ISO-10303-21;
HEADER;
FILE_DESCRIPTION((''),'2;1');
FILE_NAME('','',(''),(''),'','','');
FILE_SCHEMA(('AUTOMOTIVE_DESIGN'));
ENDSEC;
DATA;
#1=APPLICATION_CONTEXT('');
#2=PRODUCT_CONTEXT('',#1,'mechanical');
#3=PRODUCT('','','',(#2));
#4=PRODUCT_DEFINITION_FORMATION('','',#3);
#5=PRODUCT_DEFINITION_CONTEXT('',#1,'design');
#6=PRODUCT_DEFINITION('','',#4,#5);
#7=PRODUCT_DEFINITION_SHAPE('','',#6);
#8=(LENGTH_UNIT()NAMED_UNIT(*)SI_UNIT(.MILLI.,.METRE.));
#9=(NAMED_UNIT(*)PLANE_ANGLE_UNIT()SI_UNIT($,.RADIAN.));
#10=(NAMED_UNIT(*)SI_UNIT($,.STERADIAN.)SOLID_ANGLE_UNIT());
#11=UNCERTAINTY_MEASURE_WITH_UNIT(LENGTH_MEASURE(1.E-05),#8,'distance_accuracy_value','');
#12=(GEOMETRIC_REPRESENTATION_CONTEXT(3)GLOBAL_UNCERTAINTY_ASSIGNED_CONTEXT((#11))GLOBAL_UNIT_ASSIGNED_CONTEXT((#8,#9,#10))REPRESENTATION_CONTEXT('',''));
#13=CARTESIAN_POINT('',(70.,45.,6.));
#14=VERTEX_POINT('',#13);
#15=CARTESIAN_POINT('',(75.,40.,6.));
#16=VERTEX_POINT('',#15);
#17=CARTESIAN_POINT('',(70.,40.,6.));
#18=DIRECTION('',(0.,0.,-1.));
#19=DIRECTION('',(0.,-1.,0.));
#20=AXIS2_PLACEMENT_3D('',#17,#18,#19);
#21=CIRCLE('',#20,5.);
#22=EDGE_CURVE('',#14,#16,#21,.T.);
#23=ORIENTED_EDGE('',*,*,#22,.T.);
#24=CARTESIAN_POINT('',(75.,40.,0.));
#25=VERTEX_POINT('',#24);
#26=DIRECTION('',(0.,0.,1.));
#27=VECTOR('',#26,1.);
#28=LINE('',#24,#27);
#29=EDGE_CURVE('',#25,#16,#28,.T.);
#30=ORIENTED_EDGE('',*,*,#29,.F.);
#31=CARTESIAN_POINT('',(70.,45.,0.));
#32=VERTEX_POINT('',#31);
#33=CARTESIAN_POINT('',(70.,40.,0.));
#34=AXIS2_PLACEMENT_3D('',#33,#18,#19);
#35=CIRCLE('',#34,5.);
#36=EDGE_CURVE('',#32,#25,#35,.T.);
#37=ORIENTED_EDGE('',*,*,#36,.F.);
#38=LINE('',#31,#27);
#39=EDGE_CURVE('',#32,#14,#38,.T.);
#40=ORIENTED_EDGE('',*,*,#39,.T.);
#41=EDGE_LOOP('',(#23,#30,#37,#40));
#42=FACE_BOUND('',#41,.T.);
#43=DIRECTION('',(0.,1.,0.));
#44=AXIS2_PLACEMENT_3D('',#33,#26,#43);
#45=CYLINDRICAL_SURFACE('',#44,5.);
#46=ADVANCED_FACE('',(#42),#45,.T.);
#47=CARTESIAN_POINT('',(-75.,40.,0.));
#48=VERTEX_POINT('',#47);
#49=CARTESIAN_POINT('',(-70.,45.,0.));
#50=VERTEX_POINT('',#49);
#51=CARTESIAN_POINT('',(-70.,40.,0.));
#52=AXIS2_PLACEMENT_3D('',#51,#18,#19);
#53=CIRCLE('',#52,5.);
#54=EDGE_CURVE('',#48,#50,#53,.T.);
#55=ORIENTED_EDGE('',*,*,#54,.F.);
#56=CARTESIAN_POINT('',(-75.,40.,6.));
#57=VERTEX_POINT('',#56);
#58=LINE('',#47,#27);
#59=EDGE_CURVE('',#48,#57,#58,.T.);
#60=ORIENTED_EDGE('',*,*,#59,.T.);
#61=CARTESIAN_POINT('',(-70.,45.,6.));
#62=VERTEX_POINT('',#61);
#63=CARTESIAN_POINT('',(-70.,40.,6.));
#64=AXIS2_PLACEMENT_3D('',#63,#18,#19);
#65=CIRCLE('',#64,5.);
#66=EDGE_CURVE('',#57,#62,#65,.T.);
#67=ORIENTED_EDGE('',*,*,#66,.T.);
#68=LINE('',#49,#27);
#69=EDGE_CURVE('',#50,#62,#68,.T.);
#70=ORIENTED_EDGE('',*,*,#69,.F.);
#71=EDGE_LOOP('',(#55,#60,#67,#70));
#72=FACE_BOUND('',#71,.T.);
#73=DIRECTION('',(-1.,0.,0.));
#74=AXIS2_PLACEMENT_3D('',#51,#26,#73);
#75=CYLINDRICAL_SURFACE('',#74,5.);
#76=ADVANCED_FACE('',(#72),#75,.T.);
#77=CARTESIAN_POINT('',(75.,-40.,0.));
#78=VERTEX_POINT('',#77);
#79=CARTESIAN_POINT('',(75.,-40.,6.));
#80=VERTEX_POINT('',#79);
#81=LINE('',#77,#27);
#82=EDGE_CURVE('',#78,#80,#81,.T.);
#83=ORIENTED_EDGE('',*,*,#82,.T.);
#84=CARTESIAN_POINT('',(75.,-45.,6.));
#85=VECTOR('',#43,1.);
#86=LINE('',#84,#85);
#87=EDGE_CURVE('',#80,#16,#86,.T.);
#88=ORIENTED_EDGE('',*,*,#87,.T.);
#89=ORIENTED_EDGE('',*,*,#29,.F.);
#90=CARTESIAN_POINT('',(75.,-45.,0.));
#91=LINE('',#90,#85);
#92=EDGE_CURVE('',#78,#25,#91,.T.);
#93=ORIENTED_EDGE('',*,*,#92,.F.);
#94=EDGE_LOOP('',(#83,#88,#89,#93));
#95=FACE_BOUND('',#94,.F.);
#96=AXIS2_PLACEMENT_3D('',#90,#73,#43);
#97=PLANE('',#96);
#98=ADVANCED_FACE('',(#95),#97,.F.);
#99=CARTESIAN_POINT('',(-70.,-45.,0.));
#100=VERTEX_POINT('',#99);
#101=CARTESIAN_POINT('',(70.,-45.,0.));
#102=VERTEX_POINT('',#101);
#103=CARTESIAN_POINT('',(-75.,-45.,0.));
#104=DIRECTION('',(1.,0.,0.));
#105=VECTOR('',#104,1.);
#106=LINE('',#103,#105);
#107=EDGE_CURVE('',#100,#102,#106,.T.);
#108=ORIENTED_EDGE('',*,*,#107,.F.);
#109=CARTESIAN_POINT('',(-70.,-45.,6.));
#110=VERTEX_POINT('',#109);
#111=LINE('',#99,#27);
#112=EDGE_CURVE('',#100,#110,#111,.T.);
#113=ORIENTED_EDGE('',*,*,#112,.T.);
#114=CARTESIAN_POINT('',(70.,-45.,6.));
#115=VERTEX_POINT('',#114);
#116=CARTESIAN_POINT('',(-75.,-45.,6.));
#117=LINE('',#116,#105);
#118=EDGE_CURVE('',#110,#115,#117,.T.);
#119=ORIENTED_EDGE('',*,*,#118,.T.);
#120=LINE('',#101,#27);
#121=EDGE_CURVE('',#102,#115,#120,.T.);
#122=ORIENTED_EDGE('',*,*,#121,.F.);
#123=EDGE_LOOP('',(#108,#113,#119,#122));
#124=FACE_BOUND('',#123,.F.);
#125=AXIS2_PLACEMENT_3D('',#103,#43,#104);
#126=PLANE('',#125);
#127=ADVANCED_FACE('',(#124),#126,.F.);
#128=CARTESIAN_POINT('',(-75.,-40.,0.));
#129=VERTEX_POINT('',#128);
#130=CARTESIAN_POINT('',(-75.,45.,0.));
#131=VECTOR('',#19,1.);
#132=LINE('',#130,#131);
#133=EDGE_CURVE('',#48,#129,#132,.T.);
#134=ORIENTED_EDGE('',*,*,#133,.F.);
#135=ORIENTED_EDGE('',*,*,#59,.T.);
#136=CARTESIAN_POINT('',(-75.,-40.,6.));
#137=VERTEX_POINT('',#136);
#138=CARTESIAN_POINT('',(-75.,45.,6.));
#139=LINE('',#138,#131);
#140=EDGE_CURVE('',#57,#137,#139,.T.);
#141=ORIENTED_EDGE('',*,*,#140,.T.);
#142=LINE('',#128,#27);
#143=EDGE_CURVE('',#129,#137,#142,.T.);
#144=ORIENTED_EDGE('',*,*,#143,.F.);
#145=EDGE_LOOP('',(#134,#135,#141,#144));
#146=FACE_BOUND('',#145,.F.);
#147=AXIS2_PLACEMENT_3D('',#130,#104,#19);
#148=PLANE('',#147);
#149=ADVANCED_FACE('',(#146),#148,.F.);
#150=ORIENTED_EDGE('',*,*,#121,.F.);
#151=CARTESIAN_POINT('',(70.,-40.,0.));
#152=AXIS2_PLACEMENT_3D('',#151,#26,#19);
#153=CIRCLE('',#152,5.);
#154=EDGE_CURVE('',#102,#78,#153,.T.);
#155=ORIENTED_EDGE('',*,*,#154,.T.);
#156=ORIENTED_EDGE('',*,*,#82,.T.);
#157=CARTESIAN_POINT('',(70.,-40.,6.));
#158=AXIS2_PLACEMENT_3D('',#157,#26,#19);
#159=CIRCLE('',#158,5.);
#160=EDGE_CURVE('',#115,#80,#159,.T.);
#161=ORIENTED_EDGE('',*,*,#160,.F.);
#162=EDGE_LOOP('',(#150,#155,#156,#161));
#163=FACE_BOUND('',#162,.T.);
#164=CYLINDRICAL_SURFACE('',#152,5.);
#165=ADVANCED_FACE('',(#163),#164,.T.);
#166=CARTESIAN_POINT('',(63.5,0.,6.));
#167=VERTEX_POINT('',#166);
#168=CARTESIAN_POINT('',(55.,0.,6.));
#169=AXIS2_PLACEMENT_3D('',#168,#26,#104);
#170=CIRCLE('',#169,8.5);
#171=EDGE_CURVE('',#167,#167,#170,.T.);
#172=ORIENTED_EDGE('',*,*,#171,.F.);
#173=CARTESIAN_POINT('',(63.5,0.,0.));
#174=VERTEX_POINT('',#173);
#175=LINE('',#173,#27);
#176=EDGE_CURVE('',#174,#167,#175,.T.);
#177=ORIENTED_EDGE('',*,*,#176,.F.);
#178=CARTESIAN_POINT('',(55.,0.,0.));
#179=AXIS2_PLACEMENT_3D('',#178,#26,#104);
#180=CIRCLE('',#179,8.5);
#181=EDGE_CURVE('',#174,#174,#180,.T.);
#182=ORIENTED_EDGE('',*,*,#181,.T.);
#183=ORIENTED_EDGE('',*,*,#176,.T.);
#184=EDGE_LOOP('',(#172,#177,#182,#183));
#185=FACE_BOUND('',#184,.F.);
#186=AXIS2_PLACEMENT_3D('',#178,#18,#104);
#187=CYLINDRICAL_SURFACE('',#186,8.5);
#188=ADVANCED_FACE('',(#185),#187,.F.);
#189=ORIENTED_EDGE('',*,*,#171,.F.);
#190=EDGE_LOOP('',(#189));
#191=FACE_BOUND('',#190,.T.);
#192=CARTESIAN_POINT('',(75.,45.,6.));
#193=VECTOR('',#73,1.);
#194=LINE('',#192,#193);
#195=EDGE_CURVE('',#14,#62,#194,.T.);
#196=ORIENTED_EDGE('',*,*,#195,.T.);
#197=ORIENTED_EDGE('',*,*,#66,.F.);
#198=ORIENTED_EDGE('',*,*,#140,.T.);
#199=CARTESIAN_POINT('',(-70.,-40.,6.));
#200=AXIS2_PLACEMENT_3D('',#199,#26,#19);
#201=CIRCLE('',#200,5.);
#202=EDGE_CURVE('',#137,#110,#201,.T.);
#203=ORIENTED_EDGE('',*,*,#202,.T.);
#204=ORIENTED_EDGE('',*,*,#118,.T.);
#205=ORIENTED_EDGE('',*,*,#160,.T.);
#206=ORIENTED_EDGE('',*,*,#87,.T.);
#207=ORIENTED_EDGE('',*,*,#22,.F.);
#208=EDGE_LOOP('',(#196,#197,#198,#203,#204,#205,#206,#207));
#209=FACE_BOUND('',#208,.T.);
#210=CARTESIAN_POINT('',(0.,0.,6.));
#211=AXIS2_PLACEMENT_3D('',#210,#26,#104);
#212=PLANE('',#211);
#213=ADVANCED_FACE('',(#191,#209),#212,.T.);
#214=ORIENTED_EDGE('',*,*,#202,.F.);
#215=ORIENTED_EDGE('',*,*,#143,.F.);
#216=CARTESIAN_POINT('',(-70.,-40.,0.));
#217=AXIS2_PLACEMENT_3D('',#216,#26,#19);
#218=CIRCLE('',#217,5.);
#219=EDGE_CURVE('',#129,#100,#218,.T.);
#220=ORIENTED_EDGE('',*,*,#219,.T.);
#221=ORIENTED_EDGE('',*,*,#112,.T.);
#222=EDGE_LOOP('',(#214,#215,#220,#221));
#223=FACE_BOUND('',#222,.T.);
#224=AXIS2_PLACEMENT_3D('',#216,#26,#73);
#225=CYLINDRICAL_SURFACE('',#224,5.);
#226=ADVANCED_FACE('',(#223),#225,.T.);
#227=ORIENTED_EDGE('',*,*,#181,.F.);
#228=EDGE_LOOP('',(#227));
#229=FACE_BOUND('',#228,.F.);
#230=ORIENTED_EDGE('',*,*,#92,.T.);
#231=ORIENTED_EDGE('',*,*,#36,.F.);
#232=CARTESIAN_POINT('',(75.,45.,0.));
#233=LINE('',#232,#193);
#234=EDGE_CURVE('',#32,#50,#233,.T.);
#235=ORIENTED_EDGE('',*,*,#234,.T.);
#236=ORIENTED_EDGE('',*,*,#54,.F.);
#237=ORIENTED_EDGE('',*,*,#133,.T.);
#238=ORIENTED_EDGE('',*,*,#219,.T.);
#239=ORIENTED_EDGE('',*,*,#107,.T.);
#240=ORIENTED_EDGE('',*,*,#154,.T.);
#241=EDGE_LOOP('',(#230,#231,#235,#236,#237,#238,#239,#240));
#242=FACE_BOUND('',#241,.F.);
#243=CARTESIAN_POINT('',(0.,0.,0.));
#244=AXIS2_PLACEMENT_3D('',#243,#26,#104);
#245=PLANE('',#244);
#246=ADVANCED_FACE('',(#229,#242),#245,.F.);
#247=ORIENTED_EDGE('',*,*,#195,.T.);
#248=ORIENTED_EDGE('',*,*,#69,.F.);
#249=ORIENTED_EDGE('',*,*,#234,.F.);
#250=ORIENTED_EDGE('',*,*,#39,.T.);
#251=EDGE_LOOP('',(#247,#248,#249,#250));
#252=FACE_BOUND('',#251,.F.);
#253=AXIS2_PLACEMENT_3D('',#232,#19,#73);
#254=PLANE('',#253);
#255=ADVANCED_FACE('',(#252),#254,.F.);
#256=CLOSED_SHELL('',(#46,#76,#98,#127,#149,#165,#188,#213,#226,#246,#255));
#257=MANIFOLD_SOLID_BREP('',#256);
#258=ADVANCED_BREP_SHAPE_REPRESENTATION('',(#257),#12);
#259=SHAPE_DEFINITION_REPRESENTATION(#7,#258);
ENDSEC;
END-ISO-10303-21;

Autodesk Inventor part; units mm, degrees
ref_plane "YZ Plane" through (0, 0, 0) normal (1, 0, 0) x (0, 1, 0)
ref_plane "XZ Plane" through (0, 0, 0) normal (0, 1, 0) x (-1, 0, 0)
ref_plane "XY Plane" through (0, 0, 0) normal (0, 0, 1) x (1, 0, 0)
sketch "Sketch1" plane through (0, 0, 0) normal (0, 0, 1) x (1, 0, 0)
  line L0 (-75, -45) -> (75, -45)
  line L1 (75, -45) -> (75, 45)
  line L2 (75, 45) -> (-75, 45)
  line L3 (-75, 45) -> (-75, -45)
  line L4 (-75, -45) -> (75, 45) construction
  line L5 (75, -45) -> (-75, 45) construction
  circle A0 centre (55, -25) radius 8.5
  circle A1 centre (55, 25) radius 8.5
  line L6 (0, 0) -> (75, 0) construction
  circle A2 centre (55, 0) radius 8.5
  dimension "d0" = 150
  dimension "d1" = 90
  dimension "d23" = 17
  dimension "d25" = 20
  dimension "d26" = 20
extrude "Plate1" add sketch "Sketch1" along normal blind 6 contours L3 L2 L1 L0 | A0 | A1
fillet "Corner Round2" radius 5 4 edges at (-75, 45, 3) (-75, -45, 3) (75, -45, 3) (75, 45, 3)
equation "\"d26\" = d25"
equation "\"d2\" = Thickness"
equation "\"BendReliefWidth\" = Thickness"
equation "\"BendReliefDepth\" = 0.5 * Thickness"
equation "\"CornerReliefSize\" = 4 * Thickness"
equation "\"MinimumRemnant\" = 2 * Thickness"
equation "\"TransitionRadius\" = BendRadius"
equation "\"JacobiRadiusSize\" = BendRadius"
equation "\"GapSize\" = Thickness"
equation "\"Thickness\" = 6"
equation "\"BendRadius\" = 5"
properties part number "PRS 9695 leg floor plate_D1200 940" material "Stainless Steel"
